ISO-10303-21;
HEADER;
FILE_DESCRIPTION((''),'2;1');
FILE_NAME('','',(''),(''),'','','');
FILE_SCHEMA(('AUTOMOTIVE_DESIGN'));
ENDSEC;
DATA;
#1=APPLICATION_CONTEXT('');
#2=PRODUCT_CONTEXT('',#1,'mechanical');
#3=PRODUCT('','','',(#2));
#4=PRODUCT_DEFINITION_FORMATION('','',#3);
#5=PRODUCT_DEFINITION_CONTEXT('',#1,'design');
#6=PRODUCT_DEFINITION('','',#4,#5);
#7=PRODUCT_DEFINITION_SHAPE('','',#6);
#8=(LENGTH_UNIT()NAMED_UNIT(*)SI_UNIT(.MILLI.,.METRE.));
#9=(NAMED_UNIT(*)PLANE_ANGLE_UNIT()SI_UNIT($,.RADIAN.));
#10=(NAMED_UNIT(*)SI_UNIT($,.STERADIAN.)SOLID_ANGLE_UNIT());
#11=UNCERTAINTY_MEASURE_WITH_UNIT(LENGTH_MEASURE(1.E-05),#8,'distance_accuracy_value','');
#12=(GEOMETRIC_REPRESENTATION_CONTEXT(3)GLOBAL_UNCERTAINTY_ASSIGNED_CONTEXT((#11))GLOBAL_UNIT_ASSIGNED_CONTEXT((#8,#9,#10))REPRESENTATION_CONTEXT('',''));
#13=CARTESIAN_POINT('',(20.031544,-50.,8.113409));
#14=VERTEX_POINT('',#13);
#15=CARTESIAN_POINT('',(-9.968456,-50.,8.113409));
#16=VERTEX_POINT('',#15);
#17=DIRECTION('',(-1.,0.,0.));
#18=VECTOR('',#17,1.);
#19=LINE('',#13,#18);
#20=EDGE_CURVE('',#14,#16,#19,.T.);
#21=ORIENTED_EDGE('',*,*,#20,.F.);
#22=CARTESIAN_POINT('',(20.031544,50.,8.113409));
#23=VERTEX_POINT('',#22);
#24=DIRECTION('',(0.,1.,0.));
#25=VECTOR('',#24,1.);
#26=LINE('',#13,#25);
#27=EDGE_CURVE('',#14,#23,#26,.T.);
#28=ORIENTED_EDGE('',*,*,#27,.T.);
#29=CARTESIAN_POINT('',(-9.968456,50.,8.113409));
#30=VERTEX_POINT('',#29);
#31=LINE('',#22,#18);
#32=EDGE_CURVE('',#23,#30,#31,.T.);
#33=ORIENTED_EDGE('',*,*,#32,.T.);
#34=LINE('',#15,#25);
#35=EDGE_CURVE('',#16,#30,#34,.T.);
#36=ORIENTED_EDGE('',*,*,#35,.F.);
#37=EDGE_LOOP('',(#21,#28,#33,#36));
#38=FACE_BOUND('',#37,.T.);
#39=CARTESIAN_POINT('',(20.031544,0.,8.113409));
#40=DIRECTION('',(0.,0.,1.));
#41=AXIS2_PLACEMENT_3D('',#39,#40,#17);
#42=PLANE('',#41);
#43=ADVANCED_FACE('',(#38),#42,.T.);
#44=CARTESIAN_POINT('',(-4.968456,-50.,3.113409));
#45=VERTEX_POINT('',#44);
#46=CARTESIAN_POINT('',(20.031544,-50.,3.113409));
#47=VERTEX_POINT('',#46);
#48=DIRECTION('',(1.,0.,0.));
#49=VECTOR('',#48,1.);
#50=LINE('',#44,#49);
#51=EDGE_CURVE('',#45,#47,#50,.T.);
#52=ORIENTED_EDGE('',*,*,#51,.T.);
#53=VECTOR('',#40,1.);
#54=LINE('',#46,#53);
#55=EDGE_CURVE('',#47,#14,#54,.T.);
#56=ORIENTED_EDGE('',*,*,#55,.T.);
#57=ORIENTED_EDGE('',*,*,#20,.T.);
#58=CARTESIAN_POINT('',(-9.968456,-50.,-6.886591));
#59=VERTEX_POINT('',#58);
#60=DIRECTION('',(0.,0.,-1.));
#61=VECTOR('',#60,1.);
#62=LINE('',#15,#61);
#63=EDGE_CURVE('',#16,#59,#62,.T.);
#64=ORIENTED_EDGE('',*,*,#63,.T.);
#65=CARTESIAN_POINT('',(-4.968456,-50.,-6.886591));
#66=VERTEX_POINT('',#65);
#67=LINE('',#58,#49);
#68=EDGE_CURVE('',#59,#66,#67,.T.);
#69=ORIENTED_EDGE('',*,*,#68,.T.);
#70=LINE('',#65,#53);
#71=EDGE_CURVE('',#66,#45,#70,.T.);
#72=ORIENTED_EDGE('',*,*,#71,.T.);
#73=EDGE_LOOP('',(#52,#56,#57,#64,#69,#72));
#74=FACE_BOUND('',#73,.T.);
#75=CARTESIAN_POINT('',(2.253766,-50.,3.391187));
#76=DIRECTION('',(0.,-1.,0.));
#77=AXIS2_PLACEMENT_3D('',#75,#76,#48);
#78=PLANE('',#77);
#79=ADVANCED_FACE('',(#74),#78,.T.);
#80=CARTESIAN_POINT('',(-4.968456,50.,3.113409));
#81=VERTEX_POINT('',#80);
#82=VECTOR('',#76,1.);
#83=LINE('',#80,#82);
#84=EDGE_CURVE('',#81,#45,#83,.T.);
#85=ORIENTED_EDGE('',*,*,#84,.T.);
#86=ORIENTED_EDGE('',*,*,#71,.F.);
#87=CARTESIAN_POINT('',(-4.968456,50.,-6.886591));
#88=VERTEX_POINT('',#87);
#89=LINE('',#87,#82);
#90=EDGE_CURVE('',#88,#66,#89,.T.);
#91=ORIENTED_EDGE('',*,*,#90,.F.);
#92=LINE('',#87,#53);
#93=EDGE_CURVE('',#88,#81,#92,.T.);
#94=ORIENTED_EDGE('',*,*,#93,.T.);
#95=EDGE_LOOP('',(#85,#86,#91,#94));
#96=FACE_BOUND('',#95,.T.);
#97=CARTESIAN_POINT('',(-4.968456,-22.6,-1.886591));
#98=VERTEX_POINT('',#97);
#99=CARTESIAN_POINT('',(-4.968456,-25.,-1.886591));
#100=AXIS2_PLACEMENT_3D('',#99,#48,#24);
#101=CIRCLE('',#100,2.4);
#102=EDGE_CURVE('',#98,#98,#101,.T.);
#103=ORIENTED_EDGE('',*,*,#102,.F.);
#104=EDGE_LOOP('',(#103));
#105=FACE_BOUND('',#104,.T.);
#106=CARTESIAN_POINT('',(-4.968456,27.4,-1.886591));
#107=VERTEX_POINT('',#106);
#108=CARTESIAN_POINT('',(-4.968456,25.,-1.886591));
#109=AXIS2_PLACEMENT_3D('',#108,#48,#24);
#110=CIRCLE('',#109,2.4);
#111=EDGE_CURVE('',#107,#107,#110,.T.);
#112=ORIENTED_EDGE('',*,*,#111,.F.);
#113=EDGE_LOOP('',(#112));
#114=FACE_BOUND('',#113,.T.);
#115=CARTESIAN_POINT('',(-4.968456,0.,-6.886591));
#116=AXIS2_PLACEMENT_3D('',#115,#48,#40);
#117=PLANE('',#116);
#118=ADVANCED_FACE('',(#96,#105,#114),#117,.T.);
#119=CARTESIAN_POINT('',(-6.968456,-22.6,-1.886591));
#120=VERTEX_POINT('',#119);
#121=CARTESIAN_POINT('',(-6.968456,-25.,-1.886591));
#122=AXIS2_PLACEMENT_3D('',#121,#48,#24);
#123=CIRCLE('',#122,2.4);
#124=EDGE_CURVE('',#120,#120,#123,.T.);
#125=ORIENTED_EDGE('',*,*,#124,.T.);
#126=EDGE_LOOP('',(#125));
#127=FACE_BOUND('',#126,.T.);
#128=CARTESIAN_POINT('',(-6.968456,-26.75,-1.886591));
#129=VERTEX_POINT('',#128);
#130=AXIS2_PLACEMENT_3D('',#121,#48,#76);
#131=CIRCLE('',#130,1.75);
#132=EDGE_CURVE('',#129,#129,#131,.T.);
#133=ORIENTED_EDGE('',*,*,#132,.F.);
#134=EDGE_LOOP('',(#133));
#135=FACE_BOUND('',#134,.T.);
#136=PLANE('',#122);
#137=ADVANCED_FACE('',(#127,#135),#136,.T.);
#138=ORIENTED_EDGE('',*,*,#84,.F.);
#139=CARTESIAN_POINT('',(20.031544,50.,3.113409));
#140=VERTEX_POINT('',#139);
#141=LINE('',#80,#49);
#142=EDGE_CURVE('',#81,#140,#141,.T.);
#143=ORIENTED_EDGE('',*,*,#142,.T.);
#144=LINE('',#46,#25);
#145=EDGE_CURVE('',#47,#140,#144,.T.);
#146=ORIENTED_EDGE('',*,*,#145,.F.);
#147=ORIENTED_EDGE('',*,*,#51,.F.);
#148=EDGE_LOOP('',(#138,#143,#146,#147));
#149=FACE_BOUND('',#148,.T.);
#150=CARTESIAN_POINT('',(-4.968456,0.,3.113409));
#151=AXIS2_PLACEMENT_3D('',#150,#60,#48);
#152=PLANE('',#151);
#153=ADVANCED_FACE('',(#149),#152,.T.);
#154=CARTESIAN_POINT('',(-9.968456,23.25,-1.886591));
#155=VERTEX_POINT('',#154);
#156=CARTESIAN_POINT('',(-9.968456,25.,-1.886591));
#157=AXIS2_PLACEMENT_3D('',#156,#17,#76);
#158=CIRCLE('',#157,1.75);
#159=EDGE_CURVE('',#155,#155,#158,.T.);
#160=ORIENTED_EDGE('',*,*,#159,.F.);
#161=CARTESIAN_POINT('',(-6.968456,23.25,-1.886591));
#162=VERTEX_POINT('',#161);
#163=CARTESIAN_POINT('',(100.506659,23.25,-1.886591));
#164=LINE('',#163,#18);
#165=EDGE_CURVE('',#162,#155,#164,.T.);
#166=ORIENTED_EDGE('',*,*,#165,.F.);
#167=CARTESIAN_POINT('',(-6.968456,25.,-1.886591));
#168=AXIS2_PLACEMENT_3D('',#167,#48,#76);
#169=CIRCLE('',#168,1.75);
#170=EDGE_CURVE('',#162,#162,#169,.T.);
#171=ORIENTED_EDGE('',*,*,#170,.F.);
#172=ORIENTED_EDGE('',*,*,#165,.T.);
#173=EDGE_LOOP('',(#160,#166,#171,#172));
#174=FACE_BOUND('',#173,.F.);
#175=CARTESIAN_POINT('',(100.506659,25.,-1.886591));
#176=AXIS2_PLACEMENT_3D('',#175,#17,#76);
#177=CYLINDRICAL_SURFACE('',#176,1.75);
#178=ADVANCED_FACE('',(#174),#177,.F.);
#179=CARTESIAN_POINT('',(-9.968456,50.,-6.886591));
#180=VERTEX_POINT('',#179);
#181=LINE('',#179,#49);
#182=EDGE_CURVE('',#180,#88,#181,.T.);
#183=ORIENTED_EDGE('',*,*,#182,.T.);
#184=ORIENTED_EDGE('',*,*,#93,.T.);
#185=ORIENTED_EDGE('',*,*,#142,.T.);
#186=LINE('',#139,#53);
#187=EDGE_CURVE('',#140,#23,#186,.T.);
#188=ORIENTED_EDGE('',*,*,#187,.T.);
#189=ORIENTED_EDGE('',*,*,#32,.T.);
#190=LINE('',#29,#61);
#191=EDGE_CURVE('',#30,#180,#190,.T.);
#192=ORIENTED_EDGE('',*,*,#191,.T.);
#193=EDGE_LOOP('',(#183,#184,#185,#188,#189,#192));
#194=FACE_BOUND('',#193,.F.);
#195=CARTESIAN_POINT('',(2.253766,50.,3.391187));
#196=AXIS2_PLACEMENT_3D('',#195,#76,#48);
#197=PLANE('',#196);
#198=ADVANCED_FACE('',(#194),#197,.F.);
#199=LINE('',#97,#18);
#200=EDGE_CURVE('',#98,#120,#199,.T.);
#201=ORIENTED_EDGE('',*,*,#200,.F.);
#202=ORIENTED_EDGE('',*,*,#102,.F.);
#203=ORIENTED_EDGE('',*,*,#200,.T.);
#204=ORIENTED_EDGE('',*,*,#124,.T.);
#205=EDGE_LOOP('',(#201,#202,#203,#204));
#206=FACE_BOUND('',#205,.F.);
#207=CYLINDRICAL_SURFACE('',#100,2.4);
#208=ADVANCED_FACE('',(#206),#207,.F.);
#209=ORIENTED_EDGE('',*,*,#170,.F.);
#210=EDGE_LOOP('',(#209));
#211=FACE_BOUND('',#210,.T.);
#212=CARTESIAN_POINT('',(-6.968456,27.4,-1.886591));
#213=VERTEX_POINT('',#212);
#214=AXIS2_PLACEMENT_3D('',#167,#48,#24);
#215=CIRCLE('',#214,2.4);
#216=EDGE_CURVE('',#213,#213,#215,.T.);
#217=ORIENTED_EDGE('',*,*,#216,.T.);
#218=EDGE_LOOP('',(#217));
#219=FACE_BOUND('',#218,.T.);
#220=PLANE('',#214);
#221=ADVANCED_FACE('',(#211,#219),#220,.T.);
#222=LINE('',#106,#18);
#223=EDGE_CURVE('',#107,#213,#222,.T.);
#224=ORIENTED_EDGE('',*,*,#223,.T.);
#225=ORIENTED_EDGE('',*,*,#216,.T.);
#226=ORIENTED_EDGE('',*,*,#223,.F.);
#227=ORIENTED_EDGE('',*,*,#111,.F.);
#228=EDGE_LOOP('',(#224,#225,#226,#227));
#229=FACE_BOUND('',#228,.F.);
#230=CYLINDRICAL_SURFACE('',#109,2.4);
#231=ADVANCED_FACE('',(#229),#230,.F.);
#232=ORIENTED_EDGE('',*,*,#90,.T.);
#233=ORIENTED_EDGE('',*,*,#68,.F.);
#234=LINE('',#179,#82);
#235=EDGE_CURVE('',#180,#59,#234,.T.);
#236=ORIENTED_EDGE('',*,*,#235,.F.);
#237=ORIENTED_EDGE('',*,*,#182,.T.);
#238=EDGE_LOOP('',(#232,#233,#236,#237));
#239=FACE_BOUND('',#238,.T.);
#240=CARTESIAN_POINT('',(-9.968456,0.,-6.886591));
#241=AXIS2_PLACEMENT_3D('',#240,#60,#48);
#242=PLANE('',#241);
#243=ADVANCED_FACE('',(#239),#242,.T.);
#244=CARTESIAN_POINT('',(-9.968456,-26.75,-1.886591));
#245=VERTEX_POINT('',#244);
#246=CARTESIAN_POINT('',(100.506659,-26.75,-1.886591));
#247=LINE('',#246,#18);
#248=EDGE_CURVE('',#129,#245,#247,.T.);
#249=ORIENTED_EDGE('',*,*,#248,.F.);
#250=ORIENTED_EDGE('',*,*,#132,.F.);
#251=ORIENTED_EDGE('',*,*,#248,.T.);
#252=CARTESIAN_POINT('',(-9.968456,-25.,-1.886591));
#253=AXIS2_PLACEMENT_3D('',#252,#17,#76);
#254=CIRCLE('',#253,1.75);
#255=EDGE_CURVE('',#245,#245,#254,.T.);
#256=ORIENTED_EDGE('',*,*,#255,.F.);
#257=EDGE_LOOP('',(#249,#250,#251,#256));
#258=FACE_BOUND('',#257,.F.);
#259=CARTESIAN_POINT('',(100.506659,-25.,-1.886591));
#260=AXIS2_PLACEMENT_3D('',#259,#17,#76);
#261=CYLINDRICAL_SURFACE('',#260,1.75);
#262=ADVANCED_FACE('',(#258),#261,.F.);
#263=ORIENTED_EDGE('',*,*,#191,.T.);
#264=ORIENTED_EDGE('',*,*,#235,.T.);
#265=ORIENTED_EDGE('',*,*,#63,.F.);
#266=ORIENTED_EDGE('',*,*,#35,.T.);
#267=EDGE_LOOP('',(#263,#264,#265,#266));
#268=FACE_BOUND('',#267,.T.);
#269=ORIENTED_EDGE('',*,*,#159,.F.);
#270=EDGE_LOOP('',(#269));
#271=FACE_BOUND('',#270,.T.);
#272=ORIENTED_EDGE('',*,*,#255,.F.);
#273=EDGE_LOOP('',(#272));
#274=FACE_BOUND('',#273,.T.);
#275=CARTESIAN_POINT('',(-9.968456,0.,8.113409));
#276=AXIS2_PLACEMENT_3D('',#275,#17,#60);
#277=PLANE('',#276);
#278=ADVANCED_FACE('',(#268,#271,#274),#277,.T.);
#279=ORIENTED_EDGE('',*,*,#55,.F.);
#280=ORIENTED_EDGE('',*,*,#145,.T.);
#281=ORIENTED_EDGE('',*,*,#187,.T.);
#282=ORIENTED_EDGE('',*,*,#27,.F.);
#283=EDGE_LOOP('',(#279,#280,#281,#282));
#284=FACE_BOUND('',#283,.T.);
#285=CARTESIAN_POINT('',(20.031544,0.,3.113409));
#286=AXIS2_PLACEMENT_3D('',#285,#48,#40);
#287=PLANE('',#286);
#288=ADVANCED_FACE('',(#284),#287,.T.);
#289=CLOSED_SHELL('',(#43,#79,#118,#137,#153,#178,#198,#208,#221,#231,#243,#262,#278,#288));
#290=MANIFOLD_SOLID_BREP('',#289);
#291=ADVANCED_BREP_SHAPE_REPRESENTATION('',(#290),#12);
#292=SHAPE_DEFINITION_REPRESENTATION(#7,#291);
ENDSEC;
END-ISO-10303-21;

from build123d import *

# Parameters (mm, degrees)
F1_DEPTH = 50
F3_D     = 3.5
F4_R     = 2.4
F4_R_2   = 1.75
F5_DEPTH = 2


with BuildPart() as f1:
    # F0 (on Front) → F1 (new body, symmetric)
    with BuildSketch(Plane.XZ):
        Polygon((-9.9684563031, 8.1134089709), (-9.9684563031, -6.8865910291), (-4.9684563031, -6.8865910291), (-4.9684563031, 3.1134089709), (20.0315436969, 3.1134089709), (20.0315436969, 8.1134089709), align=None)
    extrude(amount=F1_DEPTH, both=True)

    # F3 (through all)
    with Locations(Plane.YZ.offset(-4.9684563031)):
        with Locations((-25, -1.8865910291), (25, -1.8865910291)):
            Hole(F3_D / 2)

    # F4 (on face) → F5 (cut)
    with BuildSketch(Plane.YZ.offset(-4.9684563031)):
        with Locations((-25, -1.8865910291)):
            Circle(F4_R)
        with Locations((-25, -1.8865910291)):
            Circle(F4_R_2, mode=Mode.SUBTRACT)
        with Locations((25, -1.8865910291)):
            Circle(F4_R)
        with Locations((25, -1.8865910291)):
            Circle(F4_R_2, mode=Mode.SUBTRACT)
    extrude(amount=-F5_DEPTH, mode=Mode.SUBTRACT)


solid = f1.part
